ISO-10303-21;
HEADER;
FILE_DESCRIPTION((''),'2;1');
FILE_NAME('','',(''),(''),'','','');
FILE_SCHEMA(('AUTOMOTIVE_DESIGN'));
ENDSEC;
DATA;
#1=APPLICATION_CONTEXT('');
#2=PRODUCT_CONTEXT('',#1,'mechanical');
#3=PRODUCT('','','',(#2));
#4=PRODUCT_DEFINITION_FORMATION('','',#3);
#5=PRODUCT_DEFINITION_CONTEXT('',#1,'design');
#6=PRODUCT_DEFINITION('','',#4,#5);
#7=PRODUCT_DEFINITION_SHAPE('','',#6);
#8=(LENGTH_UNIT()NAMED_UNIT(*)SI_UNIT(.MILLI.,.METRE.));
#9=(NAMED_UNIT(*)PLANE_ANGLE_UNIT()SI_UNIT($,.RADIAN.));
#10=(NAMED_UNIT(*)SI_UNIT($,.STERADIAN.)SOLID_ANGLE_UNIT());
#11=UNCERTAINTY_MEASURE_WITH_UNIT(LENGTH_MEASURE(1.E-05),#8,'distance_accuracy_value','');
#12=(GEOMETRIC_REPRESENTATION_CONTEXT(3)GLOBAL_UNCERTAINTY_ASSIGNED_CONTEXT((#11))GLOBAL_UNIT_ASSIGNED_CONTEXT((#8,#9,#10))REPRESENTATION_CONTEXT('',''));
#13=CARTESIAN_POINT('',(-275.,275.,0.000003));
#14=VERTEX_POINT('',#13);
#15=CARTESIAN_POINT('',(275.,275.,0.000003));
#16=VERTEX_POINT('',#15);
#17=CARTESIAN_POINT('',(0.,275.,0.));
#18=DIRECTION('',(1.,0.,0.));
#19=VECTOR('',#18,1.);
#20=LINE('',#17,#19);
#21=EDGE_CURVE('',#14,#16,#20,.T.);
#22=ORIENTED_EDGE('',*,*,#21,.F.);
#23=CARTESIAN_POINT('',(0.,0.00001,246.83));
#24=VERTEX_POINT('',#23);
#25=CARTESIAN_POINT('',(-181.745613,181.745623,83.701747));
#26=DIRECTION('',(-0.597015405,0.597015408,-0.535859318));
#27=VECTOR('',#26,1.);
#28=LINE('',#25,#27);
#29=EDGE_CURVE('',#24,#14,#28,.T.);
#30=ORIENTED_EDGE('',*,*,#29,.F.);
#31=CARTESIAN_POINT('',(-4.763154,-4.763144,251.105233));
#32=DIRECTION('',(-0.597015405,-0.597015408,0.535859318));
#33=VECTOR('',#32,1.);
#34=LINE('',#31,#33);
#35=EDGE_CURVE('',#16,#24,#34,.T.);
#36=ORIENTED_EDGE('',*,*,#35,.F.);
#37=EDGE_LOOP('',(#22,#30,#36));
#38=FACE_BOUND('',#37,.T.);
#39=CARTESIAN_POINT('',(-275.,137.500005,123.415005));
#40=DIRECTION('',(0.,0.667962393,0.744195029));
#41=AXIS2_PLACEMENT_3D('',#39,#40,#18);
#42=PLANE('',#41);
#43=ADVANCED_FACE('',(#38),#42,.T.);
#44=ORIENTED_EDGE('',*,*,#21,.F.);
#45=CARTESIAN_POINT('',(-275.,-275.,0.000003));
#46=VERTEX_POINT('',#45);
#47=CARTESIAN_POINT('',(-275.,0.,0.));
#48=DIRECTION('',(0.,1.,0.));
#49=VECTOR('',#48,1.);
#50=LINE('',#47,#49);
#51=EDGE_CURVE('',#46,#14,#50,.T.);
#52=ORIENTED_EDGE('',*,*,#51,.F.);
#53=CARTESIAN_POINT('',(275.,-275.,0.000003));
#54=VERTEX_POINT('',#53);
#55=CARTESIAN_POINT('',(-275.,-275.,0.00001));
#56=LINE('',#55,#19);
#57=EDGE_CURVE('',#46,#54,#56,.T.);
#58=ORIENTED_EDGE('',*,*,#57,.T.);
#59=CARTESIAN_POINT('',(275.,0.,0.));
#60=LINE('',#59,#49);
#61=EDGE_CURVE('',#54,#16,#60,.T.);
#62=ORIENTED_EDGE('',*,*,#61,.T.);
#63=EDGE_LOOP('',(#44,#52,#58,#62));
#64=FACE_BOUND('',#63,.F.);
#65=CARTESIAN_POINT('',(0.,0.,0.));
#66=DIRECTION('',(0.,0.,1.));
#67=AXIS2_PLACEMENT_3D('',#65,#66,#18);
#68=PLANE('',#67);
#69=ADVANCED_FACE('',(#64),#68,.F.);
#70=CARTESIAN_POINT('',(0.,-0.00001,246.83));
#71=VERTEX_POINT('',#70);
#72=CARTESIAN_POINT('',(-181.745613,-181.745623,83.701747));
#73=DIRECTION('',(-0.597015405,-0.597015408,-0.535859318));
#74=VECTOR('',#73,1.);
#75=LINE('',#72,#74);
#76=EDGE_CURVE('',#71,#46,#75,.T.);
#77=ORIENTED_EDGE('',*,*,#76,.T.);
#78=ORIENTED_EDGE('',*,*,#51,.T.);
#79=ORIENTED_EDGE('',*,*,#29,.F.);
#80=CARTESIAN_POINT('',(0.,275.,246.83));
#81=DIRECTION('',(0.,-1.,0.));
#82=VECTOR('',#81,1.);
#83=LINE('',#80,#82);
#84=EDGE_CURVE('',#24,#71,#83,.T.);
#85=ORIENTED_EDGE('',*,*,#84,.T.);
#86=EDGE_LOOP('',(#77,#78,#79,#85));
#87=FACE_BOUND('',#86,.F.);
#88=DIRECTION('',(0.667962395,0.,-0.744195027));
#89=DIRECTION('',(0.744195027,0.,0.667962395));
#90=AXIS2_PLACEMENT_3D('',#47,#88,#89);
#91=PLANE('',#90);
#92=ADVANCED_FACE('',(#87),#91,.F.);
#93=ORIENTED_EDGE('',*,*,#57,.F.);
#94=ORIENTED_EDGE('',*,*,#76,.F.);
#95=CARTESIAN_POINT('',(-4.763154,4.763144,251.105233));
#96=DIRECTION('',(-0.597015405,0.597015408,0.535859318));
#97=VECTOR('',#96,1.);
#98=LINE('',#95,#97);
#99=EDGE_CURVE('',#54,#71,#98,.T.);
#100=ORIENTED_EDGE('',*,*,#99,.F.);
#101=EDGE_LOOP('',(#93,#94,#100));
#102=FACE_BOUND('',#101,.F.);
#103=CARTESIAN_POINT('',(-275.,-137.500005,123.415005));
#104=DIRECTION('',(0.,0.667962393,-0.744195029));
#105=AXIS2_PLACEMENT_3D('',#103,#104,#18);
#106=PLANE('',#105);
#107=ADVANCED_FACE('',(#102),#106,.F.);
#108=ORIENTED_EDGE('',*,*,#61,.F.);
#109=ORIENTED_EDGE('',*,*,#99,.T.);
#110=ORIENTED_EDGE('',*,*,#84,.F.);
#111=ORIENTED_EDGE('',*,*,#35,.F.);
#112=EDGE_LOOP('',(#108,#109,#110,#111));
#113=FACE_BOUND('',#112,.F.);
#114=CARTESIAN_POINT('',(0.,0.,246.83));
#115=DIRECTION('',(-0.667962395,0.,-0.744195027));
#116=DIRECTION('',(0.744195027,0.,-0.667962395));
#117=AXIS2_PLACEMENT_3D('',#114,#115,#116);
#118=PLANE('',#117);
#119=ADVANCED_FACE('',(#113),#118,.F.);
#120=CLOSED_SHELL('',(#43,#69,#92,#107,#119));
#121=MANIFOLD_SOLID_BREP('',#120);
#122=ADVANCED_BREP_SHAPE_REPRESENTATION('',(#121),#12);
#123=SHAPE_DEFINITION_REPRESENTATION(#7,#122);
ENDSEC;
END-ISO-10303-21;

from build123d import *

# Parameters (mm, degrees)
F0_W     = 550
F0_H     = 550
F1_DEPTH = 246.83
F2_SIZE2 = 246.82999
F2_SIZE  = 274.99999
F4_DEPTH = 275


# Not quite as in the source:
# - a fillet or chamfer is up to 0.001 mm smaller than in the source, because OpenCascade refuses the exact size


with BuildPart() as f1:
    # F0 (on Top) → F1 (new body)
    with BuildSketch(Plane.XY):
        Rectangle(F0_W, F0_H)
    extrude(amount=F1_DEPTH)

    # F2 (size 275 and 246.83 in the source; OpenCascade refuses exactly that, so slightly less here)
    f2_edges = [f1.edges().sort_by_distance(p)[0] for p in [
        (0, -275, 246.83),
        (0, 275, 246.83),
    ]]
    f2_side = f1.faces().sort_by_distance((0, 0, 246.83))[0]
    chamfer(f2_edges, length=F2_SIZE, length2=F2_SIZE2, reference=f2_side)

    # F3 (on Front) → F4 (cut, symmetric)
    with BuildSketch(Plane.XZ):
        Polygon((-275, 246.83), (-275, 0), (0, 246.83), align=None)
        Polygon((275, 246.83), (0, 246.83), (275, 0), align=None)
    extrude(amount=F4_DEPTH, both=True, mode=Mode.SUBTRACT)


solid = f1.part
